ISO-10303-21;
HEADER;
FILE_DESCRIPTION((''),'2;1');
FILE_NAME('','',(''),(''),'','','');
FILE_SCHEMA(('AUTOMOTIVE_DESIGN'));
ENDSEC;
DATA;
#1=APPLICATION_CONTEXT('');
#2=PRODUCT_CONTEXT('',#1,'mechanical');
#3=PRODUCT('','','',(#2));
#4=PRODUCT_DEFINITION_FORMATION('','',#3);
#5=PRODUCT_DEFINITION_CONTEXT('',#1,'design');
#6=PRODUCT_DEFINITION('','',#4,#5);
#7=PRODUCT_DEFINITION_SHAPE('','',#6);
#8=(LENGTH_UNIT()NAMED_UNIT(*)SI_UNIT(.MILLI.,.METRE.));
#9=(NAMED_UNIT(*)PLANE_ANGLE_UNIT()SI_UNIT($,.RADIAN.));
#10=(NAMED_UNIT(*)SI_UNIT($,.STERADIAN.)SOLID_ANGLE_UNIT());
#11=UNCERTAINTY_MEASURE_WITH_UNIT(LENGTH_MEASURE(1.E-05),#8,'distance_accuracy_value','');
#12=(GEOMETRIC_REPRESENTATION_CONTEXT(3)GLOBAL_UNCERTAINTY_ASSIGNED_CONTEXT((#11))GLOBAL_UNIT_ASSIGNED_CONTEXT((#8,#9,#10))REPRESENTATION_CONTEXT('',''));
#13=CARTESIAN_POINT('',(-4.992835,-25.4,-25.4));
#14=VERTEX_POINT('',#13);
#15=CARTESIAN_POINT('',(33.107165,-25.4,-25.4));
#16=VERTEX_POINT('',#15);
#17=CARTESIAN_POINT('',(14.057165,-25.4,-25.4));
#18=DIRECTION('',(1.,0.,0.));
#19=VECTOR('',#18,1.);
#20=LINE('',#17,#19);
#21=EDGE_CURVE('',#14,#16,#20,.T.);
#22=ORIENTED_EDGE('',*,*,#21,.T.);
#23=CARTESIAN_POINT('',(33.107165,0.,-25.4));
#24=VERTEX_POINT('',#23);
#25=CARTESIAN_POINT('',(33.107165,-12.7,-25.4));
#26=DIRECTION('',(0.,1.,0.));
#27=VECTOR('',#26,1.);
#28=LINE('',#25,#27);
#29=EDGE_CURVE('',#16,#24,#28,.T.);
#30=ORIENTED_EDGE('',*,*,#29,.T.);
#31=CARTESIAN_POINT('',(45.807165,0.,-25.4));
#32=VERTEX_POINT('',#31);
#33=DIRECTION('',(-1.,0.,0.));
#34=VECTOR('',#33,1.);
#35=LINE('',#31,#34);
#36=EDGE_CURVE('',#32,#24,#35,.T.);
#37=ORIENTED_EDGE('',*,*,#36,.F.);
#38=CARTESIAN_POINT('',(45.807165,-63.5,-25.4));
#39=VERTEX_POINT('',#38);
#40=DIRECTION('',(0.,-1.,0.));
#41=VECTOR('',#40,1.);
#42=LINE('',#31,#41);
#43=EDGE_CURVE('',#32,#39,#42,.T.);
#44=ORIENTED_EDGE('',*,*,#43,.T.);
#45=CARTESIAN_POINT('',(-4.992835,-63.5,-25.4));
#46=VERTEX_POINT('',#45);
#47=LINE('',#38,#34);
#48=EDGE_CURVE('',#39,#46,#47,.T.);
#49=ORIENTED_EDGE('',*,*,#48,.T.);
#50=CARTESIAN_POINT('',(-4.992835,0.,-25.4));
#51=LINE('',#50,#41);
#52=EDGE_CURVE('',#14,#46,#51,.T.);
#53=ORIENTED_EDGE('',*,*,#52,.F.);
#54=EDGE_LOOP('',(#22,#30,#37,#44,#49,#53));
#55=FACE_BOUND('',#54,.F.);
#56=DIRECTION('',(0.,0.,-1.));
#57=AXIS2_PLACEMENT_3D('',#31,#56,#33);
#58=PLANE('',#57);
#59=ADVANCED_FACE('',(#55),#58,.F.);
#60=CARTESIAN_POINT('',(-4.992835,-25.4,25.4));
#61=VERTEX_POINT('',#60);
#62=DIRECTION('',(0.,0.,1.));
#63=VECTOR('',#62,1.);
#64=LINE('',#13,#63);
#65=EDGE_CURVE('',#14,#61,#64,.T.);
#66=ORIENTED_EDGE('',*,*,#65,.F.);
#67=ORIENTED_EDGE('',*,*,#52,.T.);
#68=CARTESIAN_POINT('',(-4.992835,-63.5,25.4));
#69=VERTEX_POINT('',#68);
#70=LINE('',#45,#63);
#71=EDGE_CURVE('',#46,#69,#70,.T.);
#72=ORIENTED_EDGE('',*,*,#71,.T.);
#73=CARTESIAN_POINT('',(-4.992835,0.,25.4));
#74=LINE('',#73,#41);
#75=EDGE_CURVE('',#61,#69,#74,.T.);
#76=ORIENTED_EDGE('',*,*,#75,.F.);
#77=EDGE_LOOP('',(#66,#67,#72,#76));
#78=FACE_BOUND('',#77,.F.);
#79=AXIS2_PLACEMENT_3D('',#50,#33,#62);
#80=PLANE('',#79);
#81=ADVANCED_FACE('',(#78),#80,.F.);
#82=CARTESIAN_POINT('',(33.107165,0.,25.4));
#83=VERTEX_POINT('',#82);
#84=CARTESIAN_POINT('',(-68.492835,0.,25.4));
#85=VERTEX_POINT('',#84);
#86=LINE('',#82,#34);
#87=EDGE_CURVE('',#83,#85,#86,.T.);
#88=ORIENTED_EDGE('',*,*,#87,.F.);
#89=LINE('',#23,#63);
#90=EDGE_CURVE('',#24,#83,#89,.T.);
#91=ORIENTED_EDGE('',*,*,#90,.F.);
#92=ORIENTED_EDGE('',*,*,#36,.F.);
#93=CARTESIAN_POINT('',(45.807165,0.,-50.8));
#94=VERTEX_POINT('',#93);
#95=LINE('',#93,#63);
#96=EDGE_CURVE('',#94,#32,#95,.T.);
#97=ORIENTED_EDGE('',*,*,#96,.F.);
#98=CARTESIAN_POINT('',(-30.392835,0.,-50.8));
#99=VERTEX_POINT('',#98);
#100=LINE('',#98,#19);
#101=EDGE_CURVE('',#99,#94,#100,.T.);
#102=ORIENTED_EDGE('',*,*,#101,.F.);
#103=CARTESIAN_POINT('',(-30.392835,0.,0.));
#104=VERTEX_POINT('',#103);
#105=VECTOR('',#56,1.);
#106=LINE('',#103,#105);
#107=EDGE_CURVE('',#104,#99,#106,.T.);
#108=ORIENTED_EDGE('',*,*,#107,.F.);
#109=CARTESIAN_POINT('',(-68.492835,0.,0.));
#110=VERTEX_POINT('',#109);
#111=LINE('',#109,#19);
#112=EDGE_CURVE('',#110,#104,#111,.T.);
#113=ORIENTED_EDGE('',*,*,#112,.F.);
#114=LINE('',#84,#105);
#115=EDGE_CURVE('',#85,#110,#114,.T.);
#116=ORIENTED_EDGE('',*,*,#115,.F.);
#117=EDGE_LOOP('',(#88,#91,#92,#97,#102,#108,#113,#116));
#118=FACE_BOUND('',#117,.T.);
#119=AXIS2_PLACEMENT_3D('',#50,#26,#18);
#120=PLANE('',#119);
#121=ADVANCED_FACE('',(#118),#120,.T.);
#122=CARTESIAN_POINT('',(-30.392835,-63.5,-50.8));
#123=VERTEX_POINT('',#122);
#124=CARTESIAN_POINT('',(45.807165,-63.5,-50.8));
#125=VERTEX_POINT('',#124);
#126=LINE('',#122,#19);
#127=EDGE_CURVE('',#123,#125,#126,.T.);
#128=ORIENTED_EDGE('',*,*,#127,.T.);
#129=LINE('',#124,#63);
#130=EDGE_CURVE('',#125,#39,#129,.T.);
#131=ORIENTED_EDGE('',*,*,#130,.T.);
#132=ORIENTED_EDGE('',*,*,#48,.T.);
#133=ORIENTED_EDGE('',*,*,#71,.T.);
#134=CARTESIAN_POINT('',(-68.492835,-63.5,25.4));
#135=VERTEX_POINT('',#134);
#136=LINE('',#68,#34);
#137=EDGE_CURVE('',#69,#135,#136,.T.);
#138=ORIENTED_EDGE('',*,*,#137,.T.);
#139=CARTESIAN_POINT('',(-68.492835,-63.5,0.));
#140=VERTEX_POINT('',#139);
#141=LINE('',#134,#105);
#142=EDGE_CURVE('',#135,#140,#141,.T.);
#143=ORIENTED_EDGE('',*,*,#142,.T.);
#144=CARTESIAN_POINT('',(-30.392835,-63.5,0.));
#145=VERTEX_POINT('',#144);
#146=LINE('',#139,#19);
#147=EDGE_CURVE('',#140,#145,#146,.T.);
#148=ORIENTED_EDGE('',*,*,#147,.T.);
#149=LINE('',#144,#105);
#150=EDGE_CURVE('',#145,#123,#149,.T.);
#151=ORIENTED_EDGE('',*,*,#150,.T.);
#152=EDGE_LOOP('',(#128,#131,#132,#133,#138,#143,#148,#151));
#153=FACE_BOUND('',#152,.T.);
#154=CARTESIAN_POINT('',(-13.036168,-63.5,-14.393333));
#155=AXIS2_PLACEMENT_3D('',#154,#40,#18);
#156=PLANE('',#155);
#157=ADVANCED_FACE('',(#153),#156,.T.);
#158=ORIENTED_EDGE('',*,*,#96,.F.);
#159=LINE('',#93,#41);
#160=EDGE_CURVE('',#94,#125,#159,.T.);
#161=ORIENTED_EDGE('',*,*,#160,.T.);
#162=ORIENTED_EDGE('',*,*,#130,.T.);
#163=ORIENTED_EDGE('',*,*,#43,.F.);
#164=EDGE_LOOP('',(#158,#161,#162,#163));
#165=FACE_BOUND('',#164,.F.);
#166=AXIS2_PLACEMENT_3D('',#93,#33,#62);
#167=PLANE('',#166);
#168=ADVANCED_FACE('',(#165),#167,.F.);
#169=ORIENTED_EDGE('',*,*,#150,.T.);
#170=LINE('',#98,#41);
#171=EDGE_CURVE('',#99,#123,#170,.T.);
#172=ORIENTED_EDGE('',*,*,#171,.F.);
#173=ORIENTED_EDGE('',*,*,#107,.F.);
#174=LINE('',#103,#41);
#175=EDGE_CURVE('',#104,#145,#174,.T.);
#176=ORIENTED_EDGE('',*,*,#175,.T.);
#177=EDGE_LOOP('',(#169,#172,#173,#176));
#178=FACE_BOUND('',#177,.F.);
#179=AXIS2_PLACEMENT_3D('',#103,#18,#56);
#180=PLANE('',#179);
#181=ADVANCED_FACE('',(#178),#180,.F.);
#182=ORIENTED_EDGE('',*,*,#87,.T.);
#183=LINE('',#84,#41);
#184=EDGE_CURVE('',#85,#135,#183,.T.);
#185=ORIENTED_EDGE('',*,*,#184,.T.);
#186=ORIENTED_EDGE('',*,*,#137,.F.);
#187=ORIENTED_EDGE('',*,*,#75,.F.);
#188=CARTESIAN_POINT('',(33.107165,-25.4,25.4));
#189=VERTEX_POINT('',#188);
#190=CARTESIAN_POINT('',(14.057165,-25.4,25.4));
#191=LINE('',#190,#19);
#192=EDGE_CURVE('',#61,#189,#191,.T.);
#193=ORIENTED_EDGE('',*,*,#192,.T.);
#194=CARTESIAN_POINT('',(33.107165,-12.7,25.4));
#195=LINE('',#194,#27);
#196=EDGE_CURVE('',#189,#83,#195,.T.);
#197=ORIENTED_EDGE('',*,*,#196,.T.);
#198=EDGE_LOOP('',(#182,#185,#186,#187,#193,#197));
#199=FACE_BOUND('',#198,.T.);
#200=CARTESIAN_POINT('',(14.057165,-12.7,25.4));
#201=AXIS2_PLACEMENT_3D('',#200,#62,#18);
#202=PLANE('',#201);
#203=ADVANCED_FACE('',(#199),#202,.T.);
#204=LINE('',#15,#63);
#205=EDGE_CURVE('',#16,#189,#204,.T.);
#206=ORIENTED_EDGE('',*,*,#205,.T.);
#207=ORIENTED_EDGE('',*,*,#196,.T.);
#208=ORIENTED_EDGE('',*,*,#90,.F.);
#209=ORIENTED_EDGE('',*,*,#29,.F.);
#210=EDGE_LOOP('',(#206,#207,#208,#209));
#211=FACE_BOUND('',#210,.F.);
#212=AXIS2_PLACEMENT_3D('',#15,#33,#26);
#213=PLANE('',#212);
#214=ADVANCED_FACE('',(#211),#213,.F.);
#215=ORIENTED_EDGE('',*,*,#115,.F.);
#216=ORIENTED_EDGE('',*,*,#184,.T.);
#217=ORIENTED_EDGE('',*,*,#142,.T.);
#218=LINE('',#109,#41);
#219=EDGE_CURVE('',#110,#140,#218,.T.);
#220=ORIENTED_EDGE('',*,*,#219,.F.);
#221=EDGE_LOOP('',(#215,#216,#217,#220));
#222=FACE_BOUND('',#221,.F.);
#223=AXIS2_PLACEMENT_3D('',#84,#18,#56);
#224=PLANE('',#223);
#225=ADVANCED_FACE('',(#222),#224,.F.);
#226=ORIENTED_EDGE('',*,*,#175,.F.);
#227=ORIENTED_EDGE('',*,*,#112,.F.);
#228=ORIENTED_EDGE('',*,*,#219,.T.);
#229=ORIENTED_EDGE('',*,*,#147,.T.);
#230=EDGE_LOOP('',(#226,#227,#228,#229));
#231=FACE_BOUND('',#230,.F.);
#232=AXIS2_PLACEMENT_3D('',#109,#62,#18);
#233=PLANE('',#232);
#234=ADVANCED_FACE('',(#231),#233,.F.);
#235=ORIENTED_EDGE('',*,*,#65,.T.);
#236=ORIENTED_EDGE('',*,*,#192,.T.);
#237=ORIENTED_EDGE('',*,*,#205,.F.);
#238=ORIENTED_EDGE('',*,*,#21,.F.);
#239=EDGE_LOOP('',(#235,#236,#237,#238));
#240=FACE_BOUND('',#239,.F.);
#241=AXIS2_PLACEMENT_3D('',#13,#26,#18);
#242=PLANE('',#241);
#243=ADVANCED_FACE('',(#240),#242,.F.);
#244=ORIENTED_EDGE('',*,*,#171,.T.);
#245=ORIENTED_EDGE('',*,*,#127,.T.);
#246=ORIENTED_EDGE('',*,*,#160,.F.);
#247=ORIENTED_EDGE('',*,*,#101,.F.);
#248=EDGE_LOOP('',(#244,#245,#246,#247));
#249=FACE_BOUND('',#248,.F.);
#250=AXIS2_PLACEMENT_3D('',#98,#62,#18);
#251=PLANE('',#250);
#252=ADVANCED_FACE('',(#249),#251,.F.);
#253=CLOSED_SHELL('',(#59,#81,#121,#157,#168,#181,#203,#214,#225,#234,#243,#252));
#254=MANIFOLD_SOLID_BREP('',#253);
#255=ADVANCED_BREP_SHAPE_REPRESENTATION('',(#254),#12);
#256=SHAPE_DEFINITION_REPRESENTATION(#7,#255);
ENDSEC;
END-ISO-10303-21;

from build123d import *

# Parameters (mm, degrees)
F1_DEPTH = 63.5
F2_W     = 38.1
F2_H     = 25.4
F3_DEPTH = 50.8


# Not quite as in the source:
# - a feature names something its author has since deleted; it is built from what else it names


with BuildPart() as f1:
    # F0 (on Front) → F1 (new body)
    with BuildSketch(Plane.XZ):
        Polygon((-30.3928350806, -50.8), (45.8071649194, -50.8), (45.8071649194, -25.4), (-4.9928350806, -25.4), (-4.9928350806, 25.4), (-68.4928350806, 25.4), (-68.4928350806, 0), (-30.3928350806, 0), align=None)
    extrude(amount=F1_DEPTH)

    # F2 (on face) → F3 (join)
    with BuildSketch(Plane.XY.offset(-25.4)):
        with Locations((14.0571649194, -12.7)):
            Rectangle(F2_W, F2_H)
    extrude(amount=F3_DEPTH)


solid = f1.part
